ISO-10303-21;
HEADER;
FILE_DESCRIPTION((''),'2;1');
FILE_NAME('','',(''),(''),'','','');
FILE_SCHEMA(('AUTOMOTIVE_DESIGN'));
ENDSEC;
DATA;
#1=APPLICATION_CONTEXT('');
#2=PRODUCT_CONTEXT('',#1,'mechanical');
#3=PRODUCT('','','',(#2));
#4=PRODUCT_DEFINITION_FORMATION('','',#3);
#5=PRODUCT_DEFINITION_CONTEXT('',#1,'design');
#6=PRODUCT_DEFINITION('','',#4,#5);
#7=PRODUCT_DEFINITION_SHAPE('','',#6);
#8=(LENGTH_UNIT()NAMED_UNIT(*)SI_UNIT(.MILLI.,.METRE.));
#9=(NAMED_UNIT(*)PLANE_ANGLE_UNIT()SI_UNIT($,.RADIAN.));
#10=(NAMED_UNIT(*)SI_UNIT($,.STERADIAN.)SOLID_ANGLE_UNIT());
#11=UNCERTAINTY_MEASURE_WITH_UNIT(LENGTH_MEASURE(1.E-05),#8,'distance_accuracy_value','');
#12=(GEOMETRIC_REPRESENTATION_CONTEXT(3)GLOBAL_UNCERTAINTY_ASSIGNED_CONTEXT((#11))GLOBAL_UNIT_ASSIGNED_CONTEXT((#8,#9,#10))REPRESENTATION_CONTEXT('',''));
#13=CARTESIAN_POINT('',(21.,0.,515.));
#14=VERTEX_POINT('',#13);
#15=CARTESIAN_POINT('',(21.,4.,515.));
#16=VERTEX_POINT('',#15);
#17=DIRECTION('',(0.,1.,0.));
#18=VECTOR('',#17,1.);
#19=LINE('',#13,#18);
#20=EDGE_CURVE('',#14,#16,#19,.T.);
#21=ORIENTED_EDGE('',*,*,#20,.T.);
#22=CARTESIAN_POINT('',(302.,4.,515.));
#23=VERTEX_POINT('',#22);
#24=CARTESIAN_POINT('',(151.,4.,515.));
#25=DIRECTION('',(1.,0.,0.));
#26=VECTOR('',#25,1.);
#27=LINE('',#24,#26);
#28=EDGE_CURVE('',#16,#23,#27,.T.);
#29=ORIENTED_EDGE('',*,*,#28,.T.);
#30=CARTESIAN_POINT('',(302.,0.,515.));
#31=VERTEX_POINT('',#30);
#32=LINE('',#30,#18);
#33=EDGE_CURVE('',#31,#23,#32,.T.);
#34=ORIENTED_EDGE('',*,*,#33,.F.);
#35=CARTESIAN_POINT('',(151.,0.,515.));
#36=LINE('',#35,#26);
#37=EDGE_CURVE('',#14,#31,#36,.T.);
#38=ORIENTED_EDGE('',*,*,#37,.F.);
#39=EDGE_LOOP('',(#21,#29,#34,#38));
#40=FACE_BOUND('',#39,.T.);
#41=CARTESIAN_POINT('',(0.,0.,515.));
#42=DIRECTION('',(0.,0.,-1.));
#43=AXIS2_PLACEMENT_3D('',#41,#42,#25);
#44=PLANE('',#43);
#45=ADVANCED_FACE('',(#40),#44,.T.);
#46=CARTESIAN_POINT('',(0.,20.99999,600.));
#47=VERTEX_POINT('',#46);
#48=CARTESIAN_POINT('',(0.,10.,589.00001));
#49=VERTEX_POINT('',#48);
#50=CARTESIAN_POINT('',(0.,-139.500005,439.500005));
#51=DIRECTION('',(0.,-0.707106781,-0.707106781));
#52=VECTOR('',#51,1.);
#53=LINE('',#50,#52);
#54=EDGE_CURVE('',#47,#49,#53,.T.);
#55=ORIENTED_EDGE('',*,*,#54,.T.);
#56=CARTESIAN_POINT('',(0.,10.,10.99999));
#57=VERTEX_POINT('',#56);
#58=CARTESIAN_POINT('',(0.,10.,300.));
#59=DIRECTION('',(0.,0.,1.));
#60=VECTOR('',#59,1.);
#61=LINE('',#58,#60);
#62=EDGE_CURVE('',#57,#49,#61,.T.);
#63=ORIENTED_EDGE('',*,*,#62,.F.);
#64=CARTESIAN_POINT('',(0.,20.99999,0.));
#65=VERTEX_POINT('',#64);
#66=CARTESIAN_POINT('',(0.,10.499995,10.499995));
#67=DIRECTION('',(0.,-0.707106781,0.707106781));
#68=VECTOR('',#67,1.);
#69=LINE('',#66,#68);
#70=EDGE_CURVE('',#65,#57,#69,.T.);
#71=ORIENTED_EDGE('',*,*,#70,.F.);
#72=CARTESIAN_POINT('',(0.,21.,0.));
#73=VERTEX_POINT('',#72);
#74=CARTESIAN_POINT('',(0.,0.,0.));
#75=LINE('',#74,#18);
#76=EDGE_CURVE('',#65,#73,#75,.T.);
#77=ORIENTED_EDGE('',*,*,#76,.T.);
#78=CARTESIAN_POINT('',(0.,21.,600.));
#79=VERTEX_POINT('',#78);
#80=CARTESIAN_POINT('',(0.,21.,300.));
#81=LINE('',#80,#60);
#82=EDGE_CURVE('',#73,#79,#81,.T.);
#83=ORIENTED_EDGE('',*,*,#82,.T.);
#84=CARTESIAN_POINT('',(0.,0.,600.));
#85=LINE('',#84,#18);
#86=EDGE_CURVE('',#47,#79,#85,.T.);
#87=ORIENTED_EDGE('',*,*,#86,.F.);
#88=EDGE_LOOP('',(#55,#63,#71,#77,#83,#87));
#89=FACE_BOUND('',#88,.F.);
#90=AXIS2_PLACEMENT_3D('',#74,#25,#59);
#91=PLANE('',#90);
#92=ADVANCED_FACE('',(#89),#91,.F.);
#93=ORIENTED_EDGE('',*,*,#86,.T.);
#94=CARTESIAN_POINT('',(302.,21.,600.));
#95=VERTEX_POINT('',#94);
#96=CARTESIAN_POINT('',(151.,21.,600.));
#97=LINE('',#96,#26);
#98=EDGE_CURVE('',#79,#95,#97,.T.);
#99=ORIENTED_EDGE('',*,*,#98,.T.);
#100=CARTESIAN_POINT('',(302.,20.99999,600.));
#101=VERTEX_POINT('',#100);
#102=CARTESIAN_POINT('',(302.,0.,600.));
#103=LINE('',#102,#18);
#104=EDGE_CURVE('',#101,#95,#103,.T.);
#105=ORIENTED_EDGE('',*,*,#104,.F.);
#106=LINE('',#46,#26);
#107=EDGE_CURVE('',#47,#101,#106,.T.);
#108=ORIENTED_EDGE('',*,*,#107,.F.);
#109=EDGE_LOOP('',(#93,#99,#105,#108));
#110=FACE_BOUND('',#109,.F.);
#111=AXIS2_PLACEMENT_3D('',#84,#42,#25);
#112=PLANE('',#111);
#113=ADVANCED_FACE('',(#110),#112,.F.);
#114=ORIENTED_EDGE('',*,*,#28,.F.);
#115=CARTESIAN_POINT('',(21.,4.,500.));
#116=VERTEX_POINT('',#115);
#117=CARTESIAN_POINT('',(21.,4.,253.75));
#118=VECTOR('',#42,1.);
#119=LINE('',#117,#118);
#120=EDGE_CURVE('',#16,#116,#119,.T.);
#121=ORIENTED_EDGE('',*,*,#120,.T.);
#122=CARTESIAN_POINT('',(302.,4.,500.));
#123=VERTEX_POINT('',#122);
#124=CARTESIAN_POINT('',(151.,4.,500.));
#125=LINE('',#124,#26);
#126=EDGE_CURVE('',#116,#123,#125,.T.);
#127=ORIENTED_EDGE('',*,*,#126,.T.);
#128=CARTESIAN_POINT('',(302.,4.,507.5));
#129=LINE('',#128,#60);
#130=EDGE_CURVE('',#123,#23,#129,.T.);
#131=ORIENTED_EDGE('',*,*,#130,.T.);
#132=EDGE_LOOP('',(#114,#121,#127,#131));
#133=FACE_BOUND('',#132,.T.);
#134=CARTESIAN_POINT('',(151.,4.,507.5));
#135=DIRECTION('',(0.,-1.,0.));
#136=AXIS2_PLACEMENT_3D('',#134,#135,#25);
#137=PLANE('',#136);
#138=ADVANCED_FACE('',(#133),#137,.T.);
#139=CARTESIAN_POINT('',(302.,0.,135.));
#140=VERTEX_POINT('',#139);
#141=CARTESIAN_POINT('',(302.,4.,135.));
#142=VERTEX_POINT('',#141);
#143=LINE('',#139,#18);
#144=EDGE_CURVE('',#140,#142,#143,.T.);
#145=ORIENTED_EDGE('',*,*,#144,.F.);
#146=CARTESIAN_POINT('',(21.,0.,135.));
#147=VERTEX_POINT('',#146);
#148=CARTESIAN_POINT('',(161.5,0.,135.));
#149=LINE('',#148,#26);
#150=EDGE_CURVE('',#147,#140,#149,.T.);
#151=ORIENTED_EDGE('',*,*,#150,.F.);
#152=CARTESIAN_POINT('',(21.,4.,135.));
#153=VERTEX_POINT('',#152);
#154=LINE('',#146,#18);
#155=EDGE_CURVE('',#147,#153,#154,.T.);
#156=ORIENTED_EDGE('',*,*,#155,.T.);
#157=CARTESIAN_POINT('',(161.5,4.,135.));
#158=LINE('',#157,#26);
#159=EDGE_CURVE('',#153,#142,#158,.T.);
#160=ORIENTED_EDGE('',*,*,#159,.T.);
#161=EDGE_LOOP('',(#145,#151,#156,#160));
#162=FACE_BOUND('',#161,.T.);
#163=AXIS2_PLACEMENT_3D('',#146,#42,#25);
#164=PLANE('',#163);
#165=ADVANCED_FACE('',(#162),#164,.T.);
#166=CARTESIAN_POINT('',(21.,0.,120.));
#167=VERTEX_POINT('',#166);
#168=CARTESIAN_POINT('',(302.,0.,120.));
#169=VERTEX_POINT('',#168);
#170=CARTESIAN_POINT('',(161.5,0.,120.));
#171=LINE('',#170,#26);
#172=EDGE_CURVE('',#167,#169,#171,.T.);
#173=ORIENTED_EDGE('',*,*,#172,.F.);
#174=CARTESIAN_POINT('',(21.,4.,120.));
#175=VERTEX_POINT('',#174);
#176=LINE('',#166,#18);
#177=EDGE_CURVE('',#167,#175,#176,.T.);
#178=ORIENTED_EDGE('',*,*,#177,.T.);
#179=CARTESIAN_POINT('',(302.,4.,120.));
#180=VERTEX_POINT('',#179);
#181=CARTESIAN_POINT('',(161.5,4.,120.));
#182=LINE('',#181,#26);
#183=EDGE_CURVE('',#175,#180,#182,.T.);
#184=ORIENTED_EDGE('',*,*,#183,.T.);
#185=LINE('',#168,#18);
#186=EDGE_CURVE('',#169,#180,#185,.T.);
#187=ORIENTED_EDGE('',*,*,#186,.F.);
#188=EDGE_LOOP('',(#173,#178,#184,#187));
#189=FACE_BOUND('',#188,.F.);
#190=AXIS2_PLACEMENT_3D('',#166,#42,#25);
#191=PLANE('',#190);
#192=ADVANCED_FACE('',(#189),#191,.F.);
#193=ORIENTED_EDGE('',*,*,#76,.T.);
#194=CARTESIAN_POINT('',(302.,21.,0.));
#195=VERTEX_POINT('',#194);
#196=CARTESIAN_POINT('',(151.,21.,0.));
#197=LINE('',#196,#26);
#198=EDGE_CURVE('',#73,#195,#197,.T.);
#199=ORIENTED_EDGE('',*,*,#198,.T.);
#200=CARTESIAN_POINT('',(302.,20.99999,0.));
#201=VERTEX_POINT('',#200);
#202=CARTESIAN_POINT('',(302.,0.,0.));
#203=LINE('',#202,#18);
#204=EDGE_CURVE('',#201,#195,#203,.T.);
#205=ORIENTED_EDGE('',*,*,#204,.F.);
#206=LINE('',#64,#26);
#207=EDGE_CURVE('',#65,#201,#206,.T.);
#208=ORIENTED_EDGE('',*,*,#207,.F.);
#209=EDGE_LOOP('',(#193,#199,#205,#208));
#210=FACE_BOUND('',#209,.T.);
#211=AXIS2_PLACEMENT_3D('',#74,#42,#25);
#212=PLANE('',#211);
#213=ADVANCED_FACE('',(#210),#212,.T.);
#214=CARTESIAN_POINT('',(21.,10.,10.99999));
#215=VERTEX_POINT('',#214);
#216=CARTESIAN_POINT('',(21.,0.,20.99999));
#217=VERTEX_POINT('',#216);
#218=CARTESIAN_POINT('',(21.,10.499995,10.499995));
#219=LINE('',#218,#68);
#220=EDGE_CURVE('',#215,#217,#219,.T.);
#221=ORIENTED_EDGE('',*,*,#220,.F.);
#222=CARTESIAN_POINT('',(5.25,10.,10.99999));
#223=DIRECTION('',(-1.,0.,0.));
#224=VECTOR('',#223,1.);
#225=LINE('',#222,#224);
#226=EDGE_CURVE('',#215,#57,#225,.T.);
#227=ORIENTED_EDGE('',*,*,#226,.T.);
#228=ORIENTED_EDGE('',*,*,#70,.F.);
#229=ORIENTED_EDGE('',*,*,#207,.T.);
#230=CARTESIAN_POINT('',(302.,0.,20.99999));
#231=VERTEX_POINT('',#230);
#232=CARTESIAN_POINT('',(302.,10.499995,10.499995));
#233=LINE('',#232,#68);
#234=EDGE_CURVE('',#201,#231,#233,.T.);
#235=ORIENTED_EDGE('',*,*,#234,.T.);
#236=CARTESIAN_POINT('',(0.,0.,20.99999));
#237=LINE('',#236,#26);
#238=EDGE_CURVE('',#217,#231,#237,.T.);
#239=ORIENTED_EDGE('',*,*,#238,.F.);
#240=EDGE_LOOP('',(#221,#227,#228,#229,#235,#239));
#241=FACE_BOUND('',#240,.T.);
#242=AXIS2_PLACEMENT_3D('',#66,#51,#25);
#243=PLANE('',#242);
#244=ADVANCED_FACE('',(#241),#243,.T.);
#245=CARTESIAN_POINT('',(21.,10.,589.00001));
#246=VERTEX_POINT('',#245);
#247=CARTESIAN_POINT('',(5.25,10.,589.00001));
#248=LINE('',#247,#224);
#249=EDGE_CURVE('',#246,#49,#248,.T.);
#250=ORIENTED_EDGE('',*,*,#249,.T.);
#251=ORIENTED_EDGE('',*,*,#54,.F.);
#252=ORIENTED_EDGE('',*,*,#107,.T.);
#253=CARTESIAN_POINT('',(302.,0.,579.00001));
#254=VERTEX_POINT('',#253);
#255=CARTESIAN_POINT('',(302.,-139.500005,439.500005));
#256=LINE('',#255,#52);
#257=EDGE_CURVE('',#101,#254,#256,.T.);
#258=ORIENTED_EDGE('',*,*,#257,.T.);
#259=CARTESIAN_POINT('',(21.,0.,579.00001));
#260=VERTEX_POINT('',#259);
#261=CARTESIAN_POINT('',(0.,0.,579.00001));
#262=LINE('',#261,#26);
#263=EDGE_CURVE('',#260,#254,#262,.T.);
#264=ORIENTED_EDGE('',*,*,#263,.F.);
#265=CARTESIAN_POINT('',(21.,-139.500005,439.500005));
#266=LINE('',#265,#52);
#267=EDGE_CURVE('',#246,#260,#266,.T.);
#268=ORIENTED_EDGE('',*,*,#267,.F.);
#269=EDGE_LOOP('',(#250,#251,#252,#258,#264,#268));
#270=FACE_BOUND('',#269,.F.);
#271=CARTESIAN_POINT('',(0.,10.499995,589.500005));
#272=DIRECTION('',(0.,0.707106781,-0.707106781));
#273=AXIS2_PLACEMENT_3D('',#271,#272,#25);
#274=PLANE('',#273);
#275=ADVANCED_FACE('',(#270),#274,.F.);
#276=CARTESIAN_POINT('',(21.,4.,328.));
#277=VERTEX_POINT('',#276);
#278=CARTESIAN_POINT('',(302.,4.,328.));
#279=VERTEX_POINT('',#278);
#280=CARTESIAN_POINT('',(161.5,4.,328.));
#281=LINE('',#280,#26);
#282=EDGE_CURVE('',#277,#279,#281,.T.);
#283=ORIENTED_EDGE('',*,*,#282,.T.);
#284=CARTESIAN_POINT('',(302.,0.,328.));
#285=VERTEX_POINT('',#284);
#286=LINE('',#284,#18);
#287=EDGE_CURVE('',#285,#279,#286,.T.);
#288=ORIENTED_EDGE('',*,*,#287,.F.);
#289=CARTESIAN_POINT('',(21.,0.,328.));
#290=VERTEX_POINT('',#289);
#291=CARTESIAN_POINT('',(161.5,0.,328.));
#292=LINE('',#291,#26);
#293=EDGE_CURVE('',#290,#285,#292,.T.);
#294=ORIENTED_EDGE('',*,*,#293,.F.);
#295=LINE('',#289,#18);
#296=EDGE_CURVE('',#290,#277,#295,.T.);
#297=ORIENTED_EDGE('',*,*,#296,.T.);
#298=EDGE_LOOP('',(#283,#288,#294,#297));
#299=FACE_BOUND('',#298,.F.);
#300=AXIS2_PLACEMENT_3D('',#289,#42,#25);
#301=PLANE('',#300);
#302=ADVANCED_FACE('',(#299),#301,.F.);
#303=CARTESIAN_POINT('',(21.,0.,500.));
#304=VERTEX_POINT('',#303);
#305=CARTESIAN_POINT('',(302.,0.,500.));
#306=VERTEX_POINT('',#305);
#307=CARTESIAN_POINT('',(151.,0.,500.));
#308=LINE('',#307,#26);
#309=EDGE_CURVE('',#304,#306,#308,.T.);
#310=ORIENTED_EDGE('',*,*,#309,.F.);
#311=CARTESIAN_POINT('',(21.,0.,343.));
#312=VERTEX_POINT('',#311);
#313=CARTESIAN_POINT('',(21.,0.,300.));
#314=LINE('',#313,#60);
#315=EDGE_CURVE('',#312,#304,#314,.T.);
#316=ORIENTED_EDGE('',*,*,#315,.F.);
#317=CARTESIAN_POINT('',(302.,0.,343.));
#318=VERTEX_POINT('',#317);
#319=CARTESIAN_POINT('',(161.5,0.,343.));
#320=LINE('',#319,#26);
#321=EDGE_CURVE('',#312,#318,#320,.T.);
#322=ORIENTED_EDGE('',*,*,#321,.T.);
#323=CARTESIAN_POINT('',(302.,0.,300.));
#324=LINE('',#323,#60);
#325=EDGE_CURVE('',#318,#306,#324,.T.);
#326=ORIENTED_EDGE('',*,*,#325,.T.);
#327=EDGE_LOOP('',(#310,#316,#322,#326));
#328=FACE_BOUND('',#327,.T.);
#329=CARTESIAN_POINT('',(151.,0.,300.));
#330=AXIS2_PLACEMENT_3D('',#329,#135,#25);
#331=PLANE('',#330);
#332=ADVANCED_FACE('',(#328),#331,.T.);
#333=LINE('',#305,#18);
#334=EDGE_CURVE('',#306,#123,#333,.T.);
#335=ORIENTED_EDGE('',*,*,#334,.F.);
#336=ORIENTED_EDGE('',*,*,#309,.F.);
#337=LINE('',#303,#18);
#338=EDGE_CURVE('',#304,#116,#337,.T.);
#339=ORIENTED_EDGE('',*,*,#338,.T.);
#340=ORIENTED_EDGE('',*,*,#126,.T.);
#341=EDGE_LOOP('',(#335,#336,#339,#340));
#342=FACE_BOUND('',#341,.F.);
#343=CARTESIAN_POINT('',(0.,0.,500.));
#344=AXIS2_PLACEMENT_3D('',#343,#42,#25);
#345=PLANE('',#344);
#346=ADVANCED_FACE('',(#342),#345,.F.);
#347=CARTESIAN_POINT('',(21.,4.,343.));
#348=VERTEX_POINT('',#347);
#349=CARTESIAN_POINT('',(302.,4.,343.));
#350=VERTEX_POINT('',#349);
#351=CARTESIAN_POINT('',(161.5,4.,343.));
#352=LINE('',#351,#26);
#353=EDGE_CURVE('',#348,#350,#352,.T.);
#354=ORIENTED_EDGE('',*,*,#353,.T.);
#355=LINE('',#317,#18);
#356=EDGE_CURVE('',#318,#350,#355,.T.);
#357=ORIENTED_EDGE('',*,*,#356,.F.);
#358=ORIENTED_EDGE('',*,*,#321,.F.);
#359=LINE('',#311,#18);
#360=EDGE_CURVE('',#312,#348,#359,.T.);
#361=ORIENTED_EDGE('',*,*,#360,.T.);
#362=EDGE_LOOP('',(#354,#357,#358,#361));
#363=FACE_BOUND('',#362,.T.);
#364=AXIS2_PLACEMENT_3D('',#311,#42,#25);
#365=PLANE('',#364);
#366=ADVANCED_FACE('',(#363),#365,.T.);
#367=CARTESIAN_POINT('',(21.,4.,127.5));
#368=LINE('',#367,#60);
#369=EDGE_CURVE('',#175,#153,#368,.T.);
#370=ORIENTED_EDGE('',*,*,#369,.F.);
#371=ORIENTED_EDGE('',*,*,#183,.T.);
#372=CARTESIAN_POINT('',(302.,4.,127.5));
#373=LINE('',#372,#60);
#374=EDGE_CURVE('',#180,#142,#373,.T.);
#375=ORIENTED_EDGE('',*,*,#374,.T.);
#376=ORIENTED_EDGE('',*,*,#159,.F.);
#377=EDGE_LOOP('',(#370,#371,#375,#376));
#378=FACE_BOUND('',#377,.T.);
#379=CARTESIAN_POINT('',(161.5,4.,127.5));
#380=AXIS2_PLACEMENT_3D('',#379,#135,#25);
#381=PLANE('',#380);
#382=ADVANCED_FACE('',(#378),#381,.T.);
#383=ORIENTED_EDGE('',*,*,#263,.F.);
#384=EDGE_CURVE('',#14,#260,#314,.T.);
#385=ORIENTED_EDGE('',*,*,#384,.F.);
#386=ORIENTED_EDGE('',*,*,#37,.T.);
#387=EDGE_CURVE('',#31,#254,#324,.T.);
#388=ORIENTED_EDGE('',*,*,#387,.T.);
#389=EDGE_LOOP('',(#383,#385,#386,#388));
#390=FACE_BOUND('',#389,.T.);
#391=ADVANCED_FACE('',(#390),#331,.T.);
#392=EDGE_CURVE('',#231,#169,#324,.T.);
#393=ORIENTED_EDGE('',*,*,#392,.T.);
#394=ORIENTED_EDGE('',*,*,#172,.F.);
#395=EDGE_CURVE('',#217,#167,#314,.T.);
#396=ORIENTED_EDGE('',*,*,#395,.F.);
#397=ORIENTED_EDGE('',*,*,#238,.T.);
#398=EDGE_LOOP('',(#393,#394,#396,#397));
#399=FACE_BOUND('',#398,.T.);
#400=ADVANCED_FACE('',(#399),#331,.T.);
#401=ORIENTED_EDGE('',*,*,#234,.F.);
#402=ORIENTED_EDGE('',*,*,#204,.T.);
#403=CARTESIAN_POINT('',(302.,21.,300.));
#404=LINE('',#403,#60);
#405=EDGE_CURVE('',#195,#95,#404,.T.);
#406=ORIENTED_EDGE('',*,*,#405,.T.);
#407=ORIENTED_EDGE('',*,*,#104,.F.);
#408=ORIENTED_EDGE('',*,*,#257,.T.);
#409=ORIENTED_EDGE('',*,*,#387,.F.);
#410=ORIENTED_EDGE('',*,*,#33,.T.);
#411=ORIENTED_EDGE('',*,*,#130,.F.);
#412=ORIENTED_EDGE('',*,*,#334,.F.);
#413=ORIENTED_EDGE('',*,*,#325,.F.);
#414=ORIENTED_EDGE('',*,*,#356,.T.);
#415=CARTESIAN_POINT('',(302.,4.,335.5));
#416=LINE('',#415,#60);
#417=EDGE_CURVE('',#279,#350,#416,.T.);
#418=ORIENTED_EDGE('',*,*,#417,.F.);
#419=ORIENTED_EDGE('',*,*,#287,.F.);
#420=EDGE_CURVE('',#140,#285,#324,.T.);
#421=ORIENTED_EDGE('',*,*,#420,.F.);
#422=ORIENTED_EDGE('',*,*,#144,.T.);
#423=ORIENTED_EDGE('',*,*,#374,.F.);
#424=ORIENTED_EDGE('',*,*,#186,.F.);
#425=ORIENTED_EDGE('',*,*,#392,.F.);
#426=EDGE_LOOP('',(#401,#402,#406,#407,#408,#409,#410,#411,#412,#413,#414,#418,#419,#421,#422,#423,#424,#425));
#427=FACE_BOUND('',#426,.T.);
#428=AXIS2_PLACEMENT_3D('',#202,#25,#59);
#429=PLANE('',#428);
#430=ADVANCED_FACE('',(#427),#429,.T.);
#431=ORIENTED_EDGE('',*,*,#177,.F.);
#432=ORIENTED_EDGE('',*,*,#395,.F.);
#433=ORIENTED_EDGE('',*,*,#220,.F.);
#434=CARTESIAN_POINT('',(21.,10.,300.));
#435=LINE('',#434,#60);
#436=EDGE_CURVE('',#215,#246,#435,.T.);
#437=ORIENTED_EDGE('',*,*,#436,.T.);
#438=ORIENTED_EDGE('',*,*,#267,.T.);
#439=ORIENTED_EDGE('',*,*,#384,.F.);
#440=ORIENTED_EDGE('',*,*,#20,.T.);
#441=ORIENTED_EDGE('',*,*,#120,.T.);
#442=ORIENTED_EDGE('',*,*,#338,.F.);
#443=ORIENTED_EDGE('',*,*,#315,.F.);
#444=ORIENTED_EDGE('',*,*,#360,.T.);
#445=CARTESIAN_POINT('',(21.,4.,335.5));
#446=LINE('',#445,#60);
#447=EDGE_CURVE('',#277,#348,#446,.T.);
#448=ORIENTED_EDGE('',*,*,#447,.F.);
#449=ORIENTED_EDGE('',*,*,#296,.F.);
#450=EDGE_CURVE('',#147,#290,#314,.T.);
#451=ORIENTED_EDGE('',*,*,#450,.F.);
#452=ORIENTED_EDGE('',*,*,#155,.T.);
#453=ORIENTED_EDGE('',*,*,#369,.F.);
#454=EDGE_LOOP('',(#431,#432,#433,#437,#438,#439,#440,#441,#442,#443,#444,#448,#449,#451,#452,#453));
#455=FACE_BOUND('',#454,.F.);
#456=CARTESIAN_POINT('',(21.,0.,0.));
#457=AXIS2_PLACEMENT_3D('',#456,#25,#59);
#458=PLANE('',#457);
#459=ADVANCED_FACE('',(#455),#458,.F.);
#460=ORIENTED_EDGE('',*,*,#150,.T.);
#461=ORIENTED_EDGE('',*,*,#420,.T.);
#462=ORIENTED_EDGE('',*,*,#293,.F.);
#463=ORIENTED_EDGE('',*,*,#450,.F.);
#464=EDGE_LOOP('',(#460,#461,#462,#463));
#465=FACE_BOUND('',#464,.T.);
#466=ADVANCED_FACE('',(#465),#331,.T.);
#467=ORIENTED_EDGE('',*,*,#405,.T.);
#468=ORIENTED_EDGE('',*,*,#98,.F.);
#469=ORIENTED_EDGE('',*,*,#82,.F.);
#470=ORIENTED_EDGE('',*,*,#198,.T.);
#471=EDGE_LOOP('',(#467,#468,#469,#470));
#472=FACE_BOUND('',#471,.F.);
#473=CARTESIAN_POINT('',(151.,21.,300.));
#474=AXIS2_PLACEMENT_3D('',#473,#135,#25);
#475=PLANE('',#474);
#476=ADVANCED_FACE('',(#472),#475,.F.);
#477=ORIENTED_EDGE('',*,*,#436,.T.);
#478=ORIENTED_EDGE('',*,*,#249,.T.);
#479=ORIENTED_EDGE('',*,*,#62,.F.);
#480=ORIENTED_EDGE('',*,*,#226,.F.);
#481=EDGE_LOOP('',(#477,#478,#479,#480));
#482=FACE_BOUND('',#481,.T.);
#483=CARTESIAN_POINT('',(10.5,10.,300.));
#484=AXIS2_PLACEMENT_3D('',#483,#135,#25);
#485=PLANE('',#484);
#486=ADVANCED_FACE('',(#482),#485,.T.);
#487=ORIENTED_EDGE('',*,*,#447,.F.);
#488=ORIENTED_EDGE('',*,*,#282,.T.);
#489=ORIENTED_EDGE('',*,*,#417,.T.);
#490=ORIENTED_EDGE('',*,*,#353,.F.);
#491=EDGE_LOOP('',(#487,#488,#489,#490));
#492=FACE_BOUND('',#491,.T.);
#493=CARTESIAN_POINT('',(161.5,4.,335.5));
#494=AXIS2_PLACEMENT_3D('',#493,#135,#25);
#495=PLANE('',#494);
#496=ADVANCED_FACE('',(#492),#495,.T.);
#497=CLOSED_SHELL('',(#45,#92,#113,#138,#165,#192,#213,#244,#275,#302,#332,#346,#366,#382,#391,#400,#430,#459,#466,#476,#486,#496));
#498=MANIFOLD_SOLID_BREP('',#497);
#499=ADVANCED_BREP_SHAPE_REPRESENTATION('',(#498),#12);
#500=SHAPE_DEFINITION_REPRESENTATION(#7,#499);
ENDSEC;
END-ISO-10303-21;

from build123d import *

# Parameters (mm, degrees)
F0_W     = 302
F0_H     = 600
F1_DEPTH = 21
F2_SIZE  = 20.99999
F3_W     = 21
F3_H     = 600
F4_DEPTH = 10
F5_W     = 302
F5_H     = 15
F6_DEPTH = 4
F7_W     = 281
F7_H     = 15
F8_DEPTH = 4


# Not quite as in the source:
# - a fillet or chamfer is up to 0.001 mm smaller than in the source, because OpenCascade refuses the exact size


with BuildPart() as f1:
    # F0 (on Front) → F1 (new body)
    with BuildSketch(Plane.XZ):
        with Locations((151, 300)):
            Rectangle(F0_W, F0_H)
    extrude(amount=-F1_DEPTH)

    # F2 (size 21 in the source; OpenCascade refuses exactly that, so slightly less here)
    f2_edges = [f1.edges().sort_by_distance(p)[0] for p in [
        (151, 0, 0),
        (151, 0, 600),
    ]]
    chamfer(f2_edges, length=F2_SIZE)

    # F3 (on face) → F4 (cut)
    with BuildSketch(Plane.XZ):
        with Locations((10.5, 300)):
            Rectangle(F3_W, F3_H)
    extrude(amount=-F4_DEPTH, mode=Mode.SUBTRACT)

    # F5 (on face) → F6 (cut)
    with BuildSketch(Plane.XZ):
        with Locations((151, 507.5)):
            Rectangle(F5_W, F5_H)
    extrude(amount=-F6_DEPTH, mode=Mode.SUBTRACT)

    # F7 (on face) → F8 (cut)
    with BuildSketch(Plane.XZ):
        with Locations((161.5, 335.5)):
            Rectangle(F7_W, F7_H)
        with Locations((161.5, 127.5)):
            Rectangle(F7_W, F7_H)
    extrude(amount=-F8_DEPTH, mode=Mode.SUBTRACT)


solid = f1.part
